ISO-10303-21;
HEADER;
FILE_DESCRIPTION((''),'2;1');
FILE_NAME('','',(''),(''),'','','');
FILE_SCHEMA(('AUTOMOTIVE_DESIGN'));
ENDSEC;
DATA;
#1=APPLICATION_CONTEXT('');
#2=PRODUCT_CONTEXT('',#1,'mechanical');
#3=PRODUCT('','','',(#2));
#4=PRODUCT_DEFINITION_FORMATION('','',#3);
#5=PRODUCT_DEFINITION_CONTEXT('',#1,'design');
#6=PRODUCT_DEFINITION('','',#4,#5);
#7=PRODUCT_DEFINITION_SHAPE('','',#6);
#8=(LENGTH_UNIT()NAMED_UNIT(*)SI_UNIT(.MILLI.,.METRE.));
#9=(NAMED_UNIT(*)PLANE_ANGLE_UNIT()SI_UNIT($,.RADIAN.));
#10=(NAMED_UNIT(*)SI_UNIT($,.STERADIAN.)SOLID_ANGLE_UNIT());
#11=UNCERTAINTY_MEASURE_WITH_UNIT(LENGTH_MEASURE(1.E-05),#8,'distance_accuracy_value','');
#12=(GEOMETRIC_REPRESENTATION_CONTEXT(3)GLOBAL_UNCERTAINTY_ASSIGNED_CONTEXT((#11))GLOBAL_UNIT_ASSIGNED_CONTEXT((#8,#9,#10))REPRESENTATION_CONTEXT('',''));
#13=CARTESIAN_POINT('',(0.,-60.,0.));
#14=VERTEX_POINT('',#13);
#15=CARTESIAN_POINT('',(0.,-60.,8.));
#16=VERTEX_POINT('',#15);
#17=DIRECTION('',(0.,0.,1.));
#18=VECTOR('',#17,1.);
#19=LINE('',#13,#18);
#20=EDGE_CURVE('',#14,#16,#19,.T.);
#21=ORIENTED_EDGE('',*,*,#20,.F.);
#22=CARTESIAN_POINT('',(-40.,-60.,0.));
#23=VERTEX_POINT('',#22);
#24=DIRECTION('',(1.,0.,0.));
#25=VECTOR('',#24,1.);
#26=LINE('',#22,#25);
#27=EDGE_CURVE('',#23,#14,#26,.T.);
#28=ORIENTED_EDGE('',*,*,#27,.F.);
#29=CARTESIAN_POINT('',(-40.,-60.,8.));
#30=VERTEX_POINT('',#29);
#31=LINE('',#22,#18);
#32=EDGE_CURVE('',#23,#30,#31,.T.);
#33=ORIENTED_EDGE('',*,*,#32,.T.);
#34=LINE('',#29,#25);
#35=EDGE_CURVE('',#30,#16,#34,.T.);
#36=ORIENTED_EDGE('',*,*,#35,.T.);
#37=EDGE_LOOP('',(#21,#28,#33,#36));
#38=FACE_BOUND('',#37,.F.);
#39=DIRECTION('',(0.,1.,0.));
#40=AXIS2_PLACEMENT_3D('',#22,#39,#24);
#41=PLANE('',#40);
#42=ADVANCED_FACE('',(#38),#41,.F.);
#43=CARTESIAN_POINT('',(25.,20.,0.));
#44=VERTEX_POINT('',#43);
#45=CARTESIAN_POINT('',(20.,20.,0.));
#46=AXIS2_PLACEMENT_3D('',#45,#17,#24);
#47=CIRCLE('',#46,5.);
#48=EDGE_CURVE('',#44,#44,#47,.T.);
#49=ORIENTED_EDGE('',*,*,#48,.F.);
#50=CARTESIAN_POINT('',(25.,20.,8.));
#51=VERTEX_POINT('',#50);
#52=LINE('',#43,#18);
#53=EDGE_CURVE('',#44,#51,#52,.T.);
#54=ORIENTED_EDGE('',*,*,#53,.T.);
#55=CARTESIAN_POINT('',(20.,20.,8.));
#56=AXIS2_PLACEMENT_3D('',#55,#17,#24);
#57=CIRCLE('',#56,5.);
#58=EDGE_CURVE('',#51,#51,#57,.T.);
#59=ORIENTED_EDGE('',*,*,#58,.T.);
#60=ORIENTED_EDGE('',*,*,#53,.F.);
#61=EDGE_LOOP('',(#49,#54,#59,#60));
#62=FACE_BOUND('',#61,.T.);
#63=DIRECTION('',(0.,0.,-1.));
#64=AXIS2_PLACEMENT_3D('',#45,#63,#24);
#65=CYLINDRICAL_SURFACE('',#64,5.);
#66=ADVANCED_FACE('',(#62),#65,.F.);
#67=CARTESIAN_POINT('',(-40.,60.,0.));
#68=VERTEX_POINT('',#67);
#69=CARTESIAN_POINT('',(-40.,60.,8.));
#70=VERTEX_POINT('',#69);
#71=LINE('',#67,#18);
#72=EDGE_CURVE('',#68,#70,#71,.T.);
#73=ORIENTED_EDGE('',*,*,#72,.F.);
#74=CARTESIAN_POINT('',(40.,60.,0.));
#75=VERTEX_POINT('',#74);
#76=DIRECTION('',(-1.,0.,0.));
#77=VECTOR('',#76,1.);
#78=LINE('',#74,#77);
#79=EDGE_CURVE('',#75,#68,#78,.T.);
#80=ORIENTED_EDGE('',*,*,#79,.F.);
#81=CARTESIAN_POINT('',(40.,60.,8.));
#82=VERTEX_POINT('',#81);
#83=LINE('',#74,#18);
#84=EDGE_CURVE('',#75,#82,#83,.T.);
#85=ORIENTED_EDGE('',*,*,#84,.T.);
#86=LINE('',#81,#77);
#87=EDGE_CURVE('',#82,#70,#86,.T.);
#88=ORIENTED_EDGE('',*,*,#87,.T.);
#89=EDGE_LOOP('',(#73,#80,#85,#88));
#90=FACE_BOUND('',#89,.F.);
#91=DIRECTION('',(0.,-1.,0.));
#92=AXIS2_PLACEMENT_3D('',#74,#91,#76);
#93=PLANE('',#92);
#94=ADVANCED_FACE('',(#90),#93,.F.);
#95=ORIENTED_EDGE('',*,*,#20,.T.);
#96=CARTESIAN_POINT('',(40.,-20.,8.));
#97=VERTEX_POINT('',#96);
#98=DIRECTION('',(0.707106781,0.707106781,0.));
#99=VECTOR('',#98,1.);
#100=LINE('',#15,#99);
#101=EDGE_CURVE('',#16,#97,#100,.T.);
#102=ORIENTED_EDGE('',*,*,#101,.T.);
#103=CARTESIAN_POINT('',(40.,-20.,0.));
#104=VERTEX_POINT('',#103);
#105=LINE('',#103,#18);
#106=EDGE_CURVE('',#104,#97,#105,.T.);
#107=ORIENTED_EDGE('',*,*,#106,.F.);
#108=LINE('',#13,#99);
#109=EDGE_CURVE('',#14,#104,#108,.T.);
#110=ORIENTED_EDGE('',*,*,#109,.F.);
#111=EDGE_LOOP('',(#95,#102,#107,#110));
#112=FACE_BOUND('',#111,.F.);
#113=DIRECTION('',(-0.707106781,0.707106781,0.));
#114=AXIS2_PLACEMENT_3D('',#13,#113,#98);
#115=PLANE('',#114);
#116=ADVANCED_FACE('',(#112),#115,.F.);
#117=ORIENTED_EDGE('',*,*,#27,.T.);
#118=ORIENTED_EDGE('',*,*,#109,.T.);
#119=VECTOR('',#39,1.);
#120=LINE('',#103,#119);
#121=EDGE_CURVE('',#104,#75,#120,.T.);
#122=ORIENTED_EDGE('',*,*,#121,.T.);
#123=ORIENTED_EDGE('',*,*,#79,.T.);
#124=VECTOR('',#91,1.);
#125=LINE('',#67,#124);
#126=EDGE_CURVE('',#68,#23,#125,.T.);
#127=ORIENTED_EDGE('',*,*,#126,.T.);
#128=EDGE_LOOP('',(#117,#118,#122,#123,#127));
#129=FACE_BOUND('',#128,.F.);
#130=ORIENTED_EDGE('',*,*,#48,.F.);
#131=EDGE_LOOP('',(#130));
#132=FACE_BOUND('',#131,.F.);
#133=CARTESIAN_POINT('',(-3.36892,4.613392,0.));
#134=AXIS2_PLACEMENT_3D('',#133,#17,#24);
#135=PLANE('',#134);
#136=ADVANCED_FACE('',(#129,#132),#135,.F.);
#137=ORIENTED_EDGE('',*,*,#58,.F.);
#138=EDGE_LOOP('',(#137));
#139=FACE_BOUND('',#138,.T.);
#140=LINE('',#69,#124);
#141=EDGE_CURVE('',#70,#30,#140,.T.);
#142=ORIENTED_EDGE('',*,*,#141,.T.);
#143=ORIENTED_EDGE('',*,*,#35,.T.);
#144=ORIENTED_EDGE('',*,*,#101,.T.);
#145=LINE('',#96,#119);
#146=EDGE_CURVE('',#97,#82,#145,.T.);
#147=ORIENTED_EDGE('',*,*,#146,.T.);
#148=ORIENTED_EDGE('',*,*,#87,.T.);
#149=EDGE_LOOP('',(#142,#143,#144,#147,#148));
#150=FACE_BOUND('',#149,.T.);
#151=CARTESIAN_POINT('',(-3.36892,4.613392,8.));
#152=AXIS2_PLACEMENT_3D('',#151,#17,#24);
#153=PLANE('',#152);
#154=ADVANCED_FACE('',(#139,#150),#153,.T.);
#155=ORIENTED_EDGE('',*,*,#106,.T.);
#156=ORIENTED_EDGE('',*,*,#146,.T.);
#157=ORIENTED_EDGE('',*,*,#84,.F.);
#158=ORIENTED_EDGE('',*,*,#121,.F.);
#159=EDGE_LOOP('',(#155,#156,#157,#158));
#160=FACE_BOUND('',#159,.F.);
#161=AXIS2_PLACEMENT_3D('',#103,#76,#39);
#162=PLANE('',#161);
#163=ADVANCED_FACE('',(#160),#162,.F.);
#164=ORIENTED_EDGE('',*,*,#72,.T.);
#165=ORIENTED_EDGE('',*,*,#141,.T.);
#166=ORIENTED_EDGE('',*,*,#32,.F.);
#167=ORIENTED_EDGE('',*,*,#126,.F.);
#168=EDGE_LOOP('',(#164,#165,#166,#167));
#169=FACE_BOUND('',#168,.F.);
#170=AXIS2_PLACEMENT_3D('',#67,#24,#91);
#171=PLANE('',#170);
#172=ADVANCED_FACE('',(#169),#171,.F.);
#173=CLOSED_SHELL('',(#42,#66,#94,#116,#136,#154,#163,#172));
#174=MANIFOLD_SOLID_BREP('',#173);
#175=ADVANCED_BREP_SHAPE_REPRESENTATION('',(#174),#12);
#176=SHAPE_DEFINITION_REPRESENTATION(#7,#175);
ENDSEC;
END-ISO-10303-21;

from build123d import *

# Parameters (mm, degrees)
F0_R     = 5
F1_DEPTH = 8


# Not quite as in the source:
# - a feature names something its author has since deleted; it is built from what else it names


with BuildPart() as f1:
    # F0 (on Top) → F1 (new body)
    with BuildSketch(Plane.XY):
        Polygon((40, 20), (40, 60), (-40, 60), (-40, -60), (0, -60), (40, -20), align=None)
        with Locations((20, 20)):
            Circle(F0_R, mode=Mode.SUBTRACT)
    extrude(amount=F1_DEPTH)


solid = f1.part
